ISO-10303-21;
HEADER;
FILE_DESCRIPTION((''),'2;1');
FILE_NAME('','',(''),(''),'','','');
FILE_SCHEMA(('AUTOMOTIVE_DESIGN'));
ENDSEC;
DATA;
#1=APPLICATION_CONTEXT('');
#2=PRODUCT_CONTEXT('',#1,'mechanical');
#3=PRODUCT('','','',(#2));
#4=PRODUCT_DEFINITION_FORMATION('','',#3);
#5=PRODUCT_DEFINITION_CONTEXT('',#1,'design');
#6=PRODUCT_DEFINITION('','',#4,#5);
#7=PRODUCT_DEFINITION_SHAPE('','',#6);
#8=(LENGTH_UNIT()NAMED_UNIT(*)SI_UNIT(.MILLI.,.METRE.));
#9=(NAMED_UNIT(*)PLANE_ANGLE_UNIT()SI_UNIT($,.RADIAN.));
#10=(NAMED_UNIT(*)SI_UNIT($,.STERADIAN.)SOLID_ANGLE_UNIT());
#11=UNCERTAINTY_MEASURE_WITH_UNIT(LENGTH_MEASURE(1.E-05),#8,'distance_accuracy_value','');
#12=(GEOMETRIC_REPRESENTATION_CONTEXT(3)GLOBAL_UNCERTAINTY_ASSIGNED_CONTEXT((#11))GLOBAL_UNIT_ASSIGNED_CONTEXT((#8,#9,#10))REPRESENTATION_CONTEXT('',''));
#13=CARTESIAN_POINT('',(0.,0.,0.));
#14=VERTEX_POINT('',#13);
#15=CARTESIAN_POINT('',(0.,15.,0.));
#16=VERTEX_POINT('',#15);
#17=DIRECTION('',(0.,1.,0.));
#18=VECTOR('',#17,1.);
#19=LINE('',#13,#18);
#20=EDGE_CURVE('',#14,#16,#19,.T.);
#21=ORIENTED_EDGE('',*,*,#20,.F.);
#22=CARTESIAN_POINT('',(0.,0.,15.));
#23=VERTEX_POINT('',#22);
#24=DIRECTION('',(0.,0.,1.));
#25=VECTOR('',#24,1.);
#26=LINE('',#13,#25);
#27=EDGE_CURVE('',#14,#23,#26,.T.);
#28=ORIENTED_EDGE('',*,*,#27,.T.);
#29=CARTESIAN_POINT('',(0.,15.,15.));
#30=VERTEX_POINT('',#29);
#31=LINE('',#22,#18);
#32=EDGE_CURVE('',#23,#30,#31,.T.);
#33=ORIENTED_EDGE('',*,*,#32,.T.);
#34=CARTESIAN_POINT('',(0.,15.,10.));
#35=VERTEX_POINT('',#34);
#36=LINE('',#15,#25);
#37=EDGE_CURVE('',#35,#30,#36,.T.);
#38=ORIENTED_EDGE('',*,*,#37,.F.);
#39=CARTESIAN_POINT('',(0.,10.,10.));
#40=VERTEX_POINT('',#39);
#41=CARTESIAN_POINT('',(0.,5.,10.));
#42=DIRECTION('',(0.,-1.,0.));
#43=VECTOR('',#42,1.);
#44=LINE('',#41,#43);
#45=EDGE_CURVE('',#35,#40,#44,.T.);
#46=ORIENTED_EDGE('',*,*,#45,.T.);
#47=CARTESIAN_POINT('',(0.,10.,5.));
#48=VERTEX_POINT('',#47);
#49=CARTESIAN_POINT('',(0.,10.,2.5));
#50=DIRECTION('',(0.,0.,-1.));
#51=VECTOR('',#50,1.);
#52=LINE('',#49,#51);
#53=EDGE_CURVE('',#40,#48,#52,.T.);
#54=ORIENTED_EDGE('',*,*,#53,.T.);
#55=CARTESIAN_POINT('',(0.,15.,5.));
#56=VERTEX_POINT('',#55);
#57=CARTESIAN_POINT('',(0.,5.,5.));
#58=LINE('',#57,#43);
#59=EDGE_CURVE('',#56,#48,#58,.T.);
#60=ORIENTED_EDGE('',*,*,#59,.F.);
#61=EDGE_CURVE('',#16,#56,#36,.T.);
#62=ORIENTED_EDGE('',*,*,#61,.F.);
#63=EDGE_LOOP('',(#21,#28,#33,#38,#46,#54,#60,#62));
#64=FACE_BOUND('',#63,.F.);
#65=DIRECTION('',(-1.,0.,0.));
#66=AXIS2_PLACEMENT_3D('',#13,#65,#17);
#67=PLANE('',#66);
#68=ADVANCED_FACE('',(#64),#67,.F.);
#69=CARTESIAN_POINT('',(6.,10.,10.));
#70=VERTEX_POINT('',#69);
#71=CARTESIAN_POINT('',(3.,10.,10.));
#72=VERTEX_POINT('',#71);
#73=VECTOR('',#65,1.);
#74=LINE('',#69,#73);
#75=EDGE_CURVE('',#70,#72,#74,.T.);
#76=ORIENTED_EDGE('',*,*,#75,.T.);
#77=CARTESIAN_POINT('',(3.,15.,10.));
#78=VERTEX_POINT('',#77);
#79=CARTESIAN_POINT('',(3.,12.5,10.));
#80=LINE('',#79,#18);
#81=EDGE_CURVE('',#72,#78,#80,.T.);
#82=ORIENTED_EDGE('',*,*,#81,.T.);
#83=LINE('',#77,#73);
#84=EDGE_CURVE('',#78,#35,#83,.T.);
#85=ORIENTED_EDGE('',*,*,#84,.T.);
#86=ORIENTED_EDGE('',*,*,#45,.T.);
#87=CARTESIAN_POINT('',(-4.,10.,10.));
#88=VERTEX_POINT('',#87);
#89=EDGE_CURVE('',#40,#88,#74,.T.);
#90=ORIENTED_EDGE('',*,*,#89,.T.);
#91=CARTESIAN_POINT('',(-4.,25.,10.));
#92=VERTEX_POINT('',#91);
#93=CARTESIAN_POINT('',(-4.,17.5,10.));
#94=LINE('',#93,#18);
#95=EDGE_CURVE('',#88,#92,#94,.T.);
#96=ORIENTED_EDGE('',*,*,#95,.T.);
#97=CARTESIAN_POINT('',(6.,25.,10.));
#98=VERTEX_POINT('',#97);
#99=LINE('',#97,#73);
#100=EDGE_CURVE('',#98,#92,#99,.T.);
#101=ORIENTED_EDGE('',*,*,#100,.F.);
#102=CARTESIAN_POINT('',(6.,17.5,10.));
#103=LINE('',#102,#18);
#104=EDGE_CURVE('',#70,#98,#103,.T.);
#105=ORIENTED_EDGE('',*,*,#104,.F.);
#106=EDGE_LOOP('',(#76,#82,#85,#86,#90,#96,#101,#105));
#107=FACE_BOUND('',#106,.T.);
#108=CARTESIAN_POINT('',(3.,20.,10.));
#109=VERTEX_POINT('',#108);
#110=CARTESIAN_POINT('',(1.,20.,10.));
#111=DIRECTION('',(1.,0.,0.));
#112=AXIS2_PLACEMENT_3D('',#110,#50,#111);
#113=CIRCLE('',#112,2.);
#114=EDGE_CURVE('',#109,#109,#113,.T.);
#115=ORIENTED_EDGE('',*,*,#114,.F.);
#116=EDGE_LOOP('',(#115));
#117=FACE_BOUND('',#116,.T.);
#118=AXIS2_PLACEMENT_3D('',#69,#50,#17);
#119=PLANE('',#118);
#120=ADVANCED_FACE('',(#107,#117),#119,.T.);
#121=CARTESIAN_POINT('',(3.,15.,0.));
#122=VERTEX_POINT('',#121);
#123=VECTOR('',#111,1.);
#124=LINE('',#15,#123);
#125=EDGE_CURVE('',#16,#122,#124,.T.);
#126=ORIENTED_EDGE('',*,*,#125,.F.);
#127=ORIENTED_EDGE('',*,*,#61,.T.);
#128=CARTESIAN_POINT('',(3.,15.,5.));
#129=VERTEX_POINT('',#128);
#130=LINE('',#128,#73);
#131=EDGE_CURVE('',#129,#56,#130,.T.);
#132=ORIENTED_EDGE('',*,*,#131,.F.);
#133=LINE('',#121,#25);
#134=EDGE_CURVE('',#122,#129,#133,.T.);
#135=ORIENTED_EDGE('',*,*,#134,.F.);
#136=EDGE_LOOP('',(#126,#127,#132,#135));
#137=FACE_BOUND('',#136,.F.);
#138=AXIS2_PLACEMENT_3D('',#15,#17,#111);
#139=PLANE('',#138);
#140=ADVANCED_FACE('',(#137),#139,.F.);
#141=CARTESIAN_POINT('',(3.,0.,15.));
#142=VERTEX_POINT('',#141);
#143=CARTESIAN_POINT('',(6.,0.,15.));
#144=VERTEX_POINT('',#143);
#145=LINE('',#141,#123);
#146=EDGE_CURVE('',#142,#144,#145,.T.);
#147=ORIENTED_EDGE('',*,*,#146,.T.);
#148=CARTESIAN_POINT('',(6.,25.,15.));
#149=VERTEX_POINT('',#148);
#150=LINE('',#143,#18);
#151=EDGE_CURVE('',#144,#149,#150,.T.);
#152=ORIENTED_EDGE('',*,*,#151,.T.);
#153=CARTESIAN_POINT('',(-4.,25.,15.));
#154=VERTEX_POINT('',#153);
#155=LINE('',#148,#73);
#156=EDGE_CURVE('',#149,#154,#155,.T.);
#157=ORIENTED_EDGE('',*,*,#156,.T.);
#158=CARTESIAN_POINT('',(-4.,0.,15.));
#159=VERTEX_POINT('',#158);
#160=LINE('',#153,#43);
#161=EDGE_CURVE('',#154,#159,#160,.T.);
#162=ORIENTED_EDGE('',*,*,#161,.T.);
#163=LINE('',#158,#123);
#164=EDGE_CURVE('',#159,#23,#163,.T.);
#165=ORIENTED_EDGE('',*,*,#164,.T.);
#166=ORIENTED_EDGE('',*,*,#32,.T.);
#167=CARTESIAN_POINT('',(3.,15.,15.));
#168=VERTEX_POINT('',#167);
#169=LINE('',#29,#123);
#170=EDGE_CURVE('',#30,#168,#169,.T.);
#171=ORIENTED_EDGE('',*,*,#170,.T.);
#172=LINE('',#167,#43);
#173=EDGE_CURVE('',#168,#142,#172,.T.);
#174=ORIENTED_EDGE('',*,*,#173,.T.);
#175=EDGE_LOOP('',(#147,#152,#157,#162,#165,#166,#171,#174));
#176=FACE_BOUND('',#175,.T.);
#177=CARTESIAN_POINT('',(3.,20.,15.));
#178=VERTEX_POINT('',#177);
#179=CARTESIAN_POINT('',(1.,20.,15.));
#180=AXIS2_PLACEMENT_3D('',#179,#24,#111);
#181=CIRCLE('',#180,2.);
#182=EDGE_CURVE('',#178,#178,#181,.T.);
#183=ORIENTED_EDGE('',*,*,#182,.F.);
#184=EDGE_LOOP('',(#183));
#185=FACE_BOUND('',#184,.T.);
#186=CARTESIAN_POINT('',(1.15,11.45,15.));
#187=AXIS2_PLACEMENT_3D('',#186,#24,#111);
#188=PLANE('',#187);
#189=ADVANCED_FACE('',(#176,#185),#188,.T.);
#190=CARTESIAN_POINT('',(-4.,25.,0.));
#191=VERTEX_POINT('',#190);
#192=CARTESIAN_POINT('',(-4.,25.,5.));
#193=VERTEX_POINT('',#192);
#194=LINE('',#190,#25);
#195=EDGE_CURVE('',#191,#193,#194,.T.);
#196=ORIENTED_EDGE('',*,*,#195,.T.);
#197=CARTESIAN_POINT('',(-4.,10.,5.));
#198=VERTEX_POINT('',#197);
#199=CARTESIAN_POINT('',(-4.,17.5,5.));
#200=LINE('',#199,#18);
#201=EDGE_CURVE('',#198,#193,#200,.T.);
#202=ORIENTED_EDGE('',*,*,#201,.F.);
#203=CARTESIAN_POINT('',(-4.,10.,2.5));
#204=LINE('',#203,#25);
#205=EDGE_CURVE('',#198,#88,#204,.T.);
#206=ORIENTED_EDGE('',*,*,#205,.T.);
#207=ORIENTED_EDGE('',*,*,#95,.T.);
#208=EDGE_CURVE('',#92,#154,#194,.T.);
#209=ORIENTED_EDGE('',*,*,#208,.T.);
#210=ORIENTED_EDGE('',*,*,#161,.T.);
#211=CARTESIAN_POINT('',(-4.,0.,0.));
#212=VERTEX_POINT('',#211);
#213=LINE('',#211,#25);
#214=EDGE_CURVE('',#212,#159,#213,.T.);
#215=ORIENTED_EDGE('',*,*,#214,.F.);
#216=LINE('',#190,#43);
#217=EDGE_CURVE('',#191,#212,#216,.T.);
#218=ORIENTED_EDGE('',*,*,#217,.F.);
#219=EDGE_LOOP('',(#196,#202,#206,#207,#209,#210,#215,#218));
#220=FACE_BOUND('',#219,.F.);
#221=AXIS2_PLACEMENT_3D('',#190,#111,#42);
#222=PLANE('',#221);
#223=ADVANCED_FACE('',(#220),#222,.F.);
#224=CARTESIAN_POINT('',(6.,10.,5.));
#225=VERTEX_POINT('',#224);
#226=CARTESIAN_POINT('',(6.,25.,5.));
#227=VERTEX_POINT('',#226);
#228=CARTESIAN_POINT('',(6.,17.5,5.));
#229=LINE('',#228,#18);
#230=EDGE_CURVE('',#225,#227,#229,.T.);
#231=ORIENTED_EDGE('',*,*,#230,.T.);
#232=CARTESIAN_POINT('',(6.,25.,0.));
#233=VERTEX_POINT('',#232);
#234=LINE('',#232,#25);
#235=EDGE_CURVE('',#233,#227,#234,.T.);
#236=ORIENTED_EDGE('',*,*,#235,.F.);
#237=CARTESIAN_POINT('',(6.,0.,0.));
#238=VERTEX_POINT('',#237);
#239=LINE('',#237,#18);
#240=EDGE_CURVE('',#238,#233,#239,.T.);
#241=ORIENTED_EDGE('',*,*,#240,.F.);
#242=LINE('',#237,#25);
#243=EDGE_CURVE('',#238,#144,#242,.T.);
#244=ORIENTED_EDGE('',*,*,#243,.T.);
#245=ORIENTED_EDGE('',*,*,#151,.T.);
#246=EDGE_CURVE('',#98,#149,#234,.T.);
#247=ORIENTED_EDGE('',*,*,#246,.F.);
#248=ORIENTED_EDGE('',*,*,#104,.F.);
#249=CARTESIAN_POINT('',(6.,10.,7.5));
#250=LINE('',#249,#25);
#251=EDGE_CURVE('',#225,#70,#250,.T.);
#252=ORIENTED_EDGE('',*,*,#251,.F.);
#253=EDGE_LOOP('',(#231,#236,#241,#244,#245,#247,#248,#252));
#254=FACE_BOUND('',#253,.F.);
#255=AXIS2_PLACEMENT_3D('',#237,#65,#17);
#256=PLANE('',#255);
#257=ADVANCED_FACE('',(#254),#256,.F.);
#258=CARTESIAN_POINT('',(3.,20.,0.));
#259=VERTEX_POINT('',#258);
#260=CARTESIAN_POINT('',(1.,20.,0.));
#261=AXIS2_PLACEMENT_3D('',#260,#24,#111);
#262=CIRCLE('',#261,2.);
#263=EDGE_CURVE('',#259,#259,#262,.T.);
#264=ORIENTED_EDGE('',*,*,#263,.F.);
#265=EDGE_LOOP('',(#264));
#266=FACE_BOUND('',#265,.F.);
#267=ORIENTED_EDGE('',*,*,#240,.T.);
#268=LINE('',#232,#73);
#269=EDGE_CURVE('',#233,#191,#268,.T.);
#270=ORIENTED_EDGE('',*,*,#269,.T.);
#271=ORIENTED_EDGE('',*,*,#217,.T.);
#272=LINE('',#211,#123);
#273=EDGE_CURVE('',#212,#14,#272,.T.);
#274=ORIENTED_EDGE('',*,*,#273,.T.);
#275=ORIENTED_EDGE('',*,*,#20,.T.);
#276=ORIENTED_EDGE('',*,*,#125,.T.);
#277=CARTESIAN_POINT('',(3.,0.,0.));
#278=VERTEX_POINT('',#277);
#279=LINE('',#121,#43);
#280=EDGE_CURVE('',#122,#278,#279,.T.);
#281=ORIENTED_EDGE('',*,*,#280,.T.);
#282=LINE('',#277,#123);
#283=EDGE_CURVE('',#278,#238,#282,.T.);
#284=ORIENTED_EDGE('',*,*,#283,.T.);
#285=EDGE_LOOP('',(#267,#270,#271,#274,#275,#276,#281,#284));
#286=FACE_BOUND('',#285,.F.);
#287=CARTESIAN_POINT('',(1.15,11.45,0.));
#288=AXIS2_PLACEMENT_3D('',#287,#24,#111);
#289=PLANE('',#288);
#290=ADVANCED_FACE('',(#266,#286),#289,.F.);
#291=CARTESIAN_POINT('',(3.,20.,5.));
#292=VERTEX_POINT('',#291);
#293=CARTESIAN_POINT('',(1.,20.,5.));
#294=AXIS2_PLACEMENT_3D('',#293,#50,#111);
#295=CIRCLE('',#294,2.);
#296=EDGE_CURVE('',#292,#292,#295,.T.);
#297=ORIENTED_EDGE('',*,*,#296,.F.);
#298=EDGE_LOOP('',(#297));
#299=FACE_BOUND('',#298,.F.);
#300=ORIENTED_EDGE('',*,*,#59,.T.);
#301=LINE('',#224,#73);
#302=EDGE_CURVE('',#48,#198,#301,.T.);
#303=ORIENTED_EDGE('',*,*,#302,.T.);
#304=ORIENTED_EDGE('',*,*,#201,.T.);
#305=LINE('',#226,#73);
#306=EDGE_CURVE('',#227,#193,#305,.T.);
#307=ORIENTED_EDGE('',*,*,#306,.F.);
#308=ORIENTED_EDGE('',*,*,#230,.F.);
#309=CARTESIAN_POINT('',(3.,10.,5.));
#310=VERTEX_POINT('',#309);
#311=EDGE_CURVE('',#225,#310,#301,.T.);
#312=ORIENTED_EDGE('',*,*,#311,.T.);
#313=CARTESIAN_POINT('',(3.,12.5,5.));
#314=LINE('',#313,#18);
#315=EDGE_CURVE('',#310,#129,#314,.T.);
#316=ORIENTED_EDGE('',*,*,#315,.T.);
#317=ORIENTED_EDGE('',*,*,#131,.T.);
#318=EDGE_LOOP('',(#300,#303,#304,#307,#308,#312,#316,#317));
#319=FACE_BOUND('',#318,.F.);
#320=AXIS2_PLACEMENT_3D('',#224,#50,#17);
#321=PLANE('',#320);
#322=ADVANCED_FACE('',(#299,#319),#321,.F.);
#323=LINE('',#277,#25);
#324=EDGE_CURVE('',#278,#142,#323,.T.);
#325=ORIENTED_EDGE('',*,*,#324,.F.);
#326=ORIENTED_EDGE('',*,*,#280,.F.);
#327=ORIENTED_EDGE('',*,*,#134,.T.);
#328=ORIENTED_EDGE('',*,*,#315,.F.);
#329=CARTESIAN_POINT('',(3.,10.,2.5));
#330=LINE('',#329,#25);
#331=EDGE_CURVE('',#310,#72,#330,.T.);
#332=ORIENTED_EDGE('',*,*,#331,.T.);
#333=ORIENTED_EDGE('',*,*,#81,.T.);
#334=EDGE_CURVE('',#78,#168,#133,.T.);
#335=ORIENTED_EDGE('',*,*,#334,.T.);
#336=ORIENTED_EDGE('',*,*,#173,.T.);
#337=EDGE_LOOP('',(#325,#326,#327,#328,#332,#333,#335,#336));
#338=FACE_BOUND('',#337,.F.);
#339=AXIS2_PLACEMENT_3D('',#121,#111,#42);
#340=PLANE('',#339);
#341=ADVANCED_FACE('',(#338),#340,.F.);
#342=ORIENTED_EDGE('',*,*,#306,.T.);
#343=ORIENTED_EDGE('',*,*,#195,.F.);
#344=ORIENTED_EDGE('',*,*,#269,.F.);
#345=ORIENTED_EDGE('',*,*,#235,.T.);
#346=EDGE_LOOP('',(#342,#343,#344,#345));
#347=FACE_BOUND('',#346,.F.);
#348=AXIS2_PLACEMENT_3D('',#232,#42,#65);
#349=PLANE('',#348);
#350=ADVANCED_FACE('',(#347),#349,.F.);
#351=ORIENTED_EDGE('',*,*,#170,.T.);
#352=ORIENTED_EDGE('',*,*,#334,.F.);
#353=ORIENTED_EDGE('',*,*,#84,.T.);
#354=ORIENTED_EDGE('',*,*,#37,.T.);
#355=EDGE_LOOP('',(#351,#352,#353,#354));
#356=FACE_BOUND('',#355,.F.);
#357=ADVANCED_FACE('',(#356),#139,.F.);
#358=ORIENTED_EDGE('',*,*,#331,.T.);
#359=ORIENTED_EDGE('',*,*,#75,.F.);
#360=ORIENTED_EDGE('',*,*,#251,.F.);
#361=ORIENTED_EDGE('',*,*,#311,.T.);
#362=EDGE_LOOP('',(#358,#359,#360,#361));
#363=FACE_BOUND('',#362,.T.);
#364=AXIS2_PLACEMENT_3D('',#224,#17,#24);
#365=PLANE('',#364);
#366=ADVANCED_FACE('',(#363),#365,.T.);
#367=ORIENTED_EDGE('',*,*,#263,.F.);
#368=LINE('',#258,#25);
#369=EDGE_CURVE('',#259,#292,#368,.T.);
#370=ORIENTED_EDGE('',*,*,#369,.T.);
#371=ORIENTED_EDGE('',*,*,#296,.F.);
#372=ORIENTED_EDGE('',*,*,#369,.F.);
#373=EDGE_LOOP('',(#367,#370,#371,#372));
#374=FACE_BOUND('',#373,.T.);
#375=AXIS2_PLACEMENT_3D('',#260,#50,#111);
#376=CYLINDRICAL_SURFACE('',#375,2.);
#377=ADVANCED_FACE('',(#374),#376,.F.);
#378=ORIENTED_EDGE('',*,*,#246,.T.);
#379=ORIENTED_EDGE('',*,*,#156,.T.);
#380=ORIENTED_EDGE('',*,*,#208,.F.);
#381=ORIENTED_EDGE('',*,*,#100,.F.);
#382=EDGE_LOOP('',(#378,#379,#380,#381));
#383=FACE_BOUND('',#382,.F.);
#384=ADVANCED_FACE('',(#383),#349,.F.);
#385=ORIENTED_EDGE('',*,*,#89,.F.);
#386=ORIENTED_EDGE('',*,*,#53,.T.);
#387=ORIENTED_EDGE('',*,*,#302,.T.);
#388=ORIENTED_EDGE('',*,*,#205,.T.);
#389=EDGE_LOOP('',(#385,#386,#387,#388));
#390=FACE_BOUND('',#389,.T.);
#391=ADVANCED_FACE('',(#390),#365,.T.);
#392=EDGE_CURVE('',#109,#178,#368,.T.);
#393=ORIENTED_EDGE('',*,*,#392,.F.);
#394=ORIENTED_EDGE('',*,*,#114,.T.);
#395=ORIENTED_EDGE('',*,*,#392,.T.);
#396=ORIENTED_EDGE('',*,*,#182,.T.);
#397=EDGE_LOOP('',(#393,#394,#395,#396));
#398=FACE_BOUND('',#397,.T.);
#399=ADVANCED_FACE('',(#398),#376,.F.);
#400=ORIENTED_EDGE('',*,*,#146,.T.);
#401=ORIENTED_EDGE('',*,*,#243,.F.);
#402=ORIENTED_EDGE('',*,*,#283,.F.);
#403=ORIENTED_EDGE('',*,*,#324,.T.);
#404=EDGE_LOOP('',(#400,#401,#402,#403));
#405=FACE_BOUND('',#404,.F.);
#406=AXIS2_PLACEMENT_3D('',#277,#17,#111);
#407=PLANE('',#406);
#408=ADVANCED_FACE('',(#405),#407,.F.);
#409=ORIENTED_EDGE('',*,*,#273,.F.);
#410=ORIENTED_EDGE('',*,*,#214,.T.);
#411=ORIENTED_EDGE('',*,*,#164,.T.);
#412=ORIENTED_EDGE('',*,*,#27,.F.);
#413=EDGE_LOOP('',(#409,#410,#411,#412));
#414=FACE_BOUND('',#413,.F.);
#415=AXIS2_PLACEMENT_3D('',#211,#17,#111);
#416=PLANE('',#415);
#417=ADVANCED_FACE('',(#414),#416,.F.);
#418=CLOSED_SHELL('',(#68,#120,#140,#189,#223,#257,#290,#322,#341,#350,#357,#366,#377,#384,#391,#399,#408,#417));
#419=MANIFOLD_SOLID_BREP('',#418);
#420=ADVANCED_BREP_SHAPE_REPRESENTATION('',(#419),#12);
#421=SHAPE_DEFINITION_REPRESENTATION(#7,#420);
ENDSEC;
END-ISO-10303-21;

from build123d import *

# Parameters (mm, degrees)
F0_R     = 2
F1_DEPTH = 15
F2_W     = 15
F2_H     = 5
F3_DEPTH = 25.4


# Not quite as in the source:
# - a feature names something its author has since deleted; it is built from what else it names


with BuildPart() as f1:
    # F0 (on Top) → F1 (new body)
    with BuildSketch(Plane.XY):
        Polygon((-4, 0), (0, 0), (0, 15), (3, 15), (3, 0), (6, 0), (6, 25), (-4, 25), align=None)
        with Locations((1, 20)):
            Circle(F0_R, mode=Mode.SUBTRACT)
    extrude(amount=F1_DEPTH)

    # F2 (on face) → F3 (cut)
    with BuildSketch(Plane.YZ.offset(6)):
        with Locations((17.5, 7.5)):
            Rectangle(F2_W, F2_H)
    extrude(amount=-F3_DEPTH, mode=Mode.SUBTRACT)


solid = f1.part
